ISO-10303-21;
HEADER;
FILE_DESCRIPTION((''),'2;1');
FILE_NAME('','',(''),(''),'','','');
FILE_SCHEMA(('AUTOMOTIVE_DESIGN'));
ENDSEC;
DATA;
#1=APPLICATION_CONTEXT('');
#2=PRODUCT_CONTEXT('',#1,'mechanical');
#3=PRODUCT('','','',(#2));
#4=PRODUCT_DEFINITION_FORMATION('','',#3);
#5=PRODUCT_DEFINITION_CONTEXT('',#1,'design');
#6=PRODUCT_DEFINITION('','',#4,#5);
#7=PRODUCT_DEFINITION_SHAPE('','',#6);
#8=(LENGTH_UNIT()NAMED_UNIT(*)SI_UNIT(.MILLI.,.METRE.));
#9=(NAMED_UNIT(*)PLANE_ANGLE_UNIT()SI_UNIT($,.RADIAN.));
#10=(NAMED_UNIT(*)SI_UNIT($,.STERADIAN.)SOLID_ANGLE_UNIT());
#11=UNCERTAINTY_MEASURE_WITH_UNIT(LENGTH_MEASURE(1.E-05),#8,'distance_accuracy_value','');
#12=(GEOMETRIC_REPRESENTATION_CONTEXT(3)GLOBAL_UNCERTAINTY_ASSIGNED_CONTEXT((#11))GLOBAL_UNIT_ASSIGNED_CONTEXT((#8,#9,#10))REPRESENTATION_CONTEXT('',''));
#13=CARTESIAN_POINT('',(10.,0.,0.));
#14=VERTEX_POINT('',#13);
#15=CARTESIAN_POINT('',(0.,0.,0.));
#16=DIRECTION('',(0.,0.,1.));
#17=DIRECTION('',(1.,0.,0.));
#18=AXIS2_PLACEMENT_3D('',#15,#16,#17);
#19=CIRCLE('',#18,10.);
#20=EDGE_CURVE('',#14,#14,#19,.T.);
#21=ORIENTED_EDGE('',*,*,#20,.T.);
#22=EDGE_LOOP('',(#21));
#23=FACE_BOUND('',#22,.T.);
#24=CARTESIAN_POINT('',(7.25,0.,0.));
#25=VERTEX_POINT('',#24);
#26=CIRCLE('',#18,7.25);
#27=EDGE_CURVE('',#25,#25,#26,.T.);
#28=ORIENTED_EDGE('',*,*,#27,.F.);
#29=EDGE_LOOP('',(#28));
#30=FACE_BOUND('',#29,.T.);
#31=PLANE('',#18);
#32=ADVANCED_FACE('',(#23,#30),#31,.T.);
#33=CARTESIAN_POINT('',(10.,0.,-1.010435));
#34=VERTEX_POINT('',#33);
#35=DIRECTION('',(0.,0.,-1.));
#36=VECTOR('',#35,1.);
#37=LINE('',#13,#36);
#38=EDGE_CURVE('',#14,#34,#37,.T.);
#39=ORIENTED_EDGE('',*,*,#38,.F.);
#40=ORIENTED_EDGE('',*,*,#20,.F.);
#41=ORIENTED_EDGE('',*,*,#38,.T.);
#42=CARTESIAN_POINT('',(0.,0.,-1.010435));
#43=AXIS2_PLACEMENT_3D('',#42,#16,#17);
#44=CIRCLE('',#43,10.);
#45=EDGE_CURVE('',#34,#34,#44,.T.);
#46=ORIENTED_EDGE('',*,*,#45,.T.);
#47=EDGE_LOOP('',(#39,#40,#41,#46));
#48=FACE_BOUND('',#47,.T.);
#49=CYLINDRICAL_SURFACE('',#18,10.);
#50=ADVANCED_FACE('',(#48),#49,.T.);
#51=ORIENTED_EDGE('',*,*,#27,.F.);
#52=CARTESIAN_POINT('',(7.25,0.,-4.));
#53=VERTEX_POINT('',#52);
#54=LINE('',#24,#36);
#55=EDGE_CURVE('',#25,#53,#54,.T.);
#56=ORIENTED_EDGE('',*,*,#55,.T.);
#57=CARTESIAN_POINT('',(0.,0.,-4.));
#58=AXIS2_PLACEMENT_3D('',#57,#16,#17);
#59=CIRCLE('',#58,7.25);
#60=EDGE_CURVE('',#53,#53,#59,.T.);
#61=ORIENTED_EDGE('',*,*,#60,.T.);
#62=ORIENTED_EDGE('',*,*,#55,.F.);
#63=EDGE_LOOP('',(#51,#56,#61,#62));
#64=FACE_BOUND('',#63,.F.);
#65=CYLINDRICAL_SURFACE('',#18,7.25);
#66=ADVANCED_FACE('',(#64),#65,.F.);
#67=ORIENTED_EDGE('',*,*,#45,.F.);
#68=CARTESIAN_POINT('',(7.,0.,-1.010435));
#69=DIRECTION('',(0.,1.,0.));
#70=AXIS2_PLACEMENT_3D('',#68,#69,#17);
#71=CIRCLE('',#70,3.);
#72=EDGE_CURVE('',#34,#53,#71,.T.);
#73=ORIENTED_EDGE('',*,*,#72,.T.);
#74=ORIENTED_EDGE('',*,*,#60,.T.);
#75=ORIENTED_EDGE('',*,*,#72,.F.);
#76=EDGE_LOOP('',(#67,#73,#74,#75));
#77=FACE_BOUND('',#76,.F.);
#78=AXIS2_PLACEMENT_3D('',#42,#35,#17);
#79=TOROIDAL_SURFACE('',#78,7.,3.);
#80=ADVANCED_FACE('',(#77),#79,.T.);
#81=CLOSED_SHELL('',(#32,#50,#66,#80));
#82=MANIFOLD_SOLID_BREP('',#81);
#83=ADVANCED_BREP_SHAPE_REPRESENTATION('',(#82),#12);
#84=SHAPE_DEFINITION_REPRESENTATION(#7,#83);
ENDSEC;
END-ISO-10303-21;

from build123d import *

# Parameters (mm, degrees)
F0_R     = 10
F0_R_2   = 7.25
F1_DEPTH = 4


# Not quite as in the source:
# - a fillet or chamfer that OpenCascade refuses, or shapes differently, is made with other operations: its cross-section is extruded or revolved along the edge and cut away or added


with BuildPart() as f1:
    # F0 (on Top) → F1 (new body)
    with BuildSketch(Plane.XY):
        Circle(F0_R)
        Circle(F0_R_2, mode=Mode.SUBTRACT)
    extrude(amount=-F1_DEPTH)

    # F2: fillet of radius 3 on 1 edges, made by hand

    # F2_s1 → F2_t2 (revolve, cut)
    with BuildSketch(Plane.XZ):
        with BuildLine():
            ThreePointArc((10, -1.0104348142), (9.2079402166, -3.0414444154), (7.25, -4))
            Line((7.25, -4), (10, -4))
            Line((10, -4), (10, -1.0104348142))
        make_face()
    revolve(axis=Axis((0, 0, -4), (0, 0, 1)), mode=Mode.SUBTRACT)


solid = f1.part
